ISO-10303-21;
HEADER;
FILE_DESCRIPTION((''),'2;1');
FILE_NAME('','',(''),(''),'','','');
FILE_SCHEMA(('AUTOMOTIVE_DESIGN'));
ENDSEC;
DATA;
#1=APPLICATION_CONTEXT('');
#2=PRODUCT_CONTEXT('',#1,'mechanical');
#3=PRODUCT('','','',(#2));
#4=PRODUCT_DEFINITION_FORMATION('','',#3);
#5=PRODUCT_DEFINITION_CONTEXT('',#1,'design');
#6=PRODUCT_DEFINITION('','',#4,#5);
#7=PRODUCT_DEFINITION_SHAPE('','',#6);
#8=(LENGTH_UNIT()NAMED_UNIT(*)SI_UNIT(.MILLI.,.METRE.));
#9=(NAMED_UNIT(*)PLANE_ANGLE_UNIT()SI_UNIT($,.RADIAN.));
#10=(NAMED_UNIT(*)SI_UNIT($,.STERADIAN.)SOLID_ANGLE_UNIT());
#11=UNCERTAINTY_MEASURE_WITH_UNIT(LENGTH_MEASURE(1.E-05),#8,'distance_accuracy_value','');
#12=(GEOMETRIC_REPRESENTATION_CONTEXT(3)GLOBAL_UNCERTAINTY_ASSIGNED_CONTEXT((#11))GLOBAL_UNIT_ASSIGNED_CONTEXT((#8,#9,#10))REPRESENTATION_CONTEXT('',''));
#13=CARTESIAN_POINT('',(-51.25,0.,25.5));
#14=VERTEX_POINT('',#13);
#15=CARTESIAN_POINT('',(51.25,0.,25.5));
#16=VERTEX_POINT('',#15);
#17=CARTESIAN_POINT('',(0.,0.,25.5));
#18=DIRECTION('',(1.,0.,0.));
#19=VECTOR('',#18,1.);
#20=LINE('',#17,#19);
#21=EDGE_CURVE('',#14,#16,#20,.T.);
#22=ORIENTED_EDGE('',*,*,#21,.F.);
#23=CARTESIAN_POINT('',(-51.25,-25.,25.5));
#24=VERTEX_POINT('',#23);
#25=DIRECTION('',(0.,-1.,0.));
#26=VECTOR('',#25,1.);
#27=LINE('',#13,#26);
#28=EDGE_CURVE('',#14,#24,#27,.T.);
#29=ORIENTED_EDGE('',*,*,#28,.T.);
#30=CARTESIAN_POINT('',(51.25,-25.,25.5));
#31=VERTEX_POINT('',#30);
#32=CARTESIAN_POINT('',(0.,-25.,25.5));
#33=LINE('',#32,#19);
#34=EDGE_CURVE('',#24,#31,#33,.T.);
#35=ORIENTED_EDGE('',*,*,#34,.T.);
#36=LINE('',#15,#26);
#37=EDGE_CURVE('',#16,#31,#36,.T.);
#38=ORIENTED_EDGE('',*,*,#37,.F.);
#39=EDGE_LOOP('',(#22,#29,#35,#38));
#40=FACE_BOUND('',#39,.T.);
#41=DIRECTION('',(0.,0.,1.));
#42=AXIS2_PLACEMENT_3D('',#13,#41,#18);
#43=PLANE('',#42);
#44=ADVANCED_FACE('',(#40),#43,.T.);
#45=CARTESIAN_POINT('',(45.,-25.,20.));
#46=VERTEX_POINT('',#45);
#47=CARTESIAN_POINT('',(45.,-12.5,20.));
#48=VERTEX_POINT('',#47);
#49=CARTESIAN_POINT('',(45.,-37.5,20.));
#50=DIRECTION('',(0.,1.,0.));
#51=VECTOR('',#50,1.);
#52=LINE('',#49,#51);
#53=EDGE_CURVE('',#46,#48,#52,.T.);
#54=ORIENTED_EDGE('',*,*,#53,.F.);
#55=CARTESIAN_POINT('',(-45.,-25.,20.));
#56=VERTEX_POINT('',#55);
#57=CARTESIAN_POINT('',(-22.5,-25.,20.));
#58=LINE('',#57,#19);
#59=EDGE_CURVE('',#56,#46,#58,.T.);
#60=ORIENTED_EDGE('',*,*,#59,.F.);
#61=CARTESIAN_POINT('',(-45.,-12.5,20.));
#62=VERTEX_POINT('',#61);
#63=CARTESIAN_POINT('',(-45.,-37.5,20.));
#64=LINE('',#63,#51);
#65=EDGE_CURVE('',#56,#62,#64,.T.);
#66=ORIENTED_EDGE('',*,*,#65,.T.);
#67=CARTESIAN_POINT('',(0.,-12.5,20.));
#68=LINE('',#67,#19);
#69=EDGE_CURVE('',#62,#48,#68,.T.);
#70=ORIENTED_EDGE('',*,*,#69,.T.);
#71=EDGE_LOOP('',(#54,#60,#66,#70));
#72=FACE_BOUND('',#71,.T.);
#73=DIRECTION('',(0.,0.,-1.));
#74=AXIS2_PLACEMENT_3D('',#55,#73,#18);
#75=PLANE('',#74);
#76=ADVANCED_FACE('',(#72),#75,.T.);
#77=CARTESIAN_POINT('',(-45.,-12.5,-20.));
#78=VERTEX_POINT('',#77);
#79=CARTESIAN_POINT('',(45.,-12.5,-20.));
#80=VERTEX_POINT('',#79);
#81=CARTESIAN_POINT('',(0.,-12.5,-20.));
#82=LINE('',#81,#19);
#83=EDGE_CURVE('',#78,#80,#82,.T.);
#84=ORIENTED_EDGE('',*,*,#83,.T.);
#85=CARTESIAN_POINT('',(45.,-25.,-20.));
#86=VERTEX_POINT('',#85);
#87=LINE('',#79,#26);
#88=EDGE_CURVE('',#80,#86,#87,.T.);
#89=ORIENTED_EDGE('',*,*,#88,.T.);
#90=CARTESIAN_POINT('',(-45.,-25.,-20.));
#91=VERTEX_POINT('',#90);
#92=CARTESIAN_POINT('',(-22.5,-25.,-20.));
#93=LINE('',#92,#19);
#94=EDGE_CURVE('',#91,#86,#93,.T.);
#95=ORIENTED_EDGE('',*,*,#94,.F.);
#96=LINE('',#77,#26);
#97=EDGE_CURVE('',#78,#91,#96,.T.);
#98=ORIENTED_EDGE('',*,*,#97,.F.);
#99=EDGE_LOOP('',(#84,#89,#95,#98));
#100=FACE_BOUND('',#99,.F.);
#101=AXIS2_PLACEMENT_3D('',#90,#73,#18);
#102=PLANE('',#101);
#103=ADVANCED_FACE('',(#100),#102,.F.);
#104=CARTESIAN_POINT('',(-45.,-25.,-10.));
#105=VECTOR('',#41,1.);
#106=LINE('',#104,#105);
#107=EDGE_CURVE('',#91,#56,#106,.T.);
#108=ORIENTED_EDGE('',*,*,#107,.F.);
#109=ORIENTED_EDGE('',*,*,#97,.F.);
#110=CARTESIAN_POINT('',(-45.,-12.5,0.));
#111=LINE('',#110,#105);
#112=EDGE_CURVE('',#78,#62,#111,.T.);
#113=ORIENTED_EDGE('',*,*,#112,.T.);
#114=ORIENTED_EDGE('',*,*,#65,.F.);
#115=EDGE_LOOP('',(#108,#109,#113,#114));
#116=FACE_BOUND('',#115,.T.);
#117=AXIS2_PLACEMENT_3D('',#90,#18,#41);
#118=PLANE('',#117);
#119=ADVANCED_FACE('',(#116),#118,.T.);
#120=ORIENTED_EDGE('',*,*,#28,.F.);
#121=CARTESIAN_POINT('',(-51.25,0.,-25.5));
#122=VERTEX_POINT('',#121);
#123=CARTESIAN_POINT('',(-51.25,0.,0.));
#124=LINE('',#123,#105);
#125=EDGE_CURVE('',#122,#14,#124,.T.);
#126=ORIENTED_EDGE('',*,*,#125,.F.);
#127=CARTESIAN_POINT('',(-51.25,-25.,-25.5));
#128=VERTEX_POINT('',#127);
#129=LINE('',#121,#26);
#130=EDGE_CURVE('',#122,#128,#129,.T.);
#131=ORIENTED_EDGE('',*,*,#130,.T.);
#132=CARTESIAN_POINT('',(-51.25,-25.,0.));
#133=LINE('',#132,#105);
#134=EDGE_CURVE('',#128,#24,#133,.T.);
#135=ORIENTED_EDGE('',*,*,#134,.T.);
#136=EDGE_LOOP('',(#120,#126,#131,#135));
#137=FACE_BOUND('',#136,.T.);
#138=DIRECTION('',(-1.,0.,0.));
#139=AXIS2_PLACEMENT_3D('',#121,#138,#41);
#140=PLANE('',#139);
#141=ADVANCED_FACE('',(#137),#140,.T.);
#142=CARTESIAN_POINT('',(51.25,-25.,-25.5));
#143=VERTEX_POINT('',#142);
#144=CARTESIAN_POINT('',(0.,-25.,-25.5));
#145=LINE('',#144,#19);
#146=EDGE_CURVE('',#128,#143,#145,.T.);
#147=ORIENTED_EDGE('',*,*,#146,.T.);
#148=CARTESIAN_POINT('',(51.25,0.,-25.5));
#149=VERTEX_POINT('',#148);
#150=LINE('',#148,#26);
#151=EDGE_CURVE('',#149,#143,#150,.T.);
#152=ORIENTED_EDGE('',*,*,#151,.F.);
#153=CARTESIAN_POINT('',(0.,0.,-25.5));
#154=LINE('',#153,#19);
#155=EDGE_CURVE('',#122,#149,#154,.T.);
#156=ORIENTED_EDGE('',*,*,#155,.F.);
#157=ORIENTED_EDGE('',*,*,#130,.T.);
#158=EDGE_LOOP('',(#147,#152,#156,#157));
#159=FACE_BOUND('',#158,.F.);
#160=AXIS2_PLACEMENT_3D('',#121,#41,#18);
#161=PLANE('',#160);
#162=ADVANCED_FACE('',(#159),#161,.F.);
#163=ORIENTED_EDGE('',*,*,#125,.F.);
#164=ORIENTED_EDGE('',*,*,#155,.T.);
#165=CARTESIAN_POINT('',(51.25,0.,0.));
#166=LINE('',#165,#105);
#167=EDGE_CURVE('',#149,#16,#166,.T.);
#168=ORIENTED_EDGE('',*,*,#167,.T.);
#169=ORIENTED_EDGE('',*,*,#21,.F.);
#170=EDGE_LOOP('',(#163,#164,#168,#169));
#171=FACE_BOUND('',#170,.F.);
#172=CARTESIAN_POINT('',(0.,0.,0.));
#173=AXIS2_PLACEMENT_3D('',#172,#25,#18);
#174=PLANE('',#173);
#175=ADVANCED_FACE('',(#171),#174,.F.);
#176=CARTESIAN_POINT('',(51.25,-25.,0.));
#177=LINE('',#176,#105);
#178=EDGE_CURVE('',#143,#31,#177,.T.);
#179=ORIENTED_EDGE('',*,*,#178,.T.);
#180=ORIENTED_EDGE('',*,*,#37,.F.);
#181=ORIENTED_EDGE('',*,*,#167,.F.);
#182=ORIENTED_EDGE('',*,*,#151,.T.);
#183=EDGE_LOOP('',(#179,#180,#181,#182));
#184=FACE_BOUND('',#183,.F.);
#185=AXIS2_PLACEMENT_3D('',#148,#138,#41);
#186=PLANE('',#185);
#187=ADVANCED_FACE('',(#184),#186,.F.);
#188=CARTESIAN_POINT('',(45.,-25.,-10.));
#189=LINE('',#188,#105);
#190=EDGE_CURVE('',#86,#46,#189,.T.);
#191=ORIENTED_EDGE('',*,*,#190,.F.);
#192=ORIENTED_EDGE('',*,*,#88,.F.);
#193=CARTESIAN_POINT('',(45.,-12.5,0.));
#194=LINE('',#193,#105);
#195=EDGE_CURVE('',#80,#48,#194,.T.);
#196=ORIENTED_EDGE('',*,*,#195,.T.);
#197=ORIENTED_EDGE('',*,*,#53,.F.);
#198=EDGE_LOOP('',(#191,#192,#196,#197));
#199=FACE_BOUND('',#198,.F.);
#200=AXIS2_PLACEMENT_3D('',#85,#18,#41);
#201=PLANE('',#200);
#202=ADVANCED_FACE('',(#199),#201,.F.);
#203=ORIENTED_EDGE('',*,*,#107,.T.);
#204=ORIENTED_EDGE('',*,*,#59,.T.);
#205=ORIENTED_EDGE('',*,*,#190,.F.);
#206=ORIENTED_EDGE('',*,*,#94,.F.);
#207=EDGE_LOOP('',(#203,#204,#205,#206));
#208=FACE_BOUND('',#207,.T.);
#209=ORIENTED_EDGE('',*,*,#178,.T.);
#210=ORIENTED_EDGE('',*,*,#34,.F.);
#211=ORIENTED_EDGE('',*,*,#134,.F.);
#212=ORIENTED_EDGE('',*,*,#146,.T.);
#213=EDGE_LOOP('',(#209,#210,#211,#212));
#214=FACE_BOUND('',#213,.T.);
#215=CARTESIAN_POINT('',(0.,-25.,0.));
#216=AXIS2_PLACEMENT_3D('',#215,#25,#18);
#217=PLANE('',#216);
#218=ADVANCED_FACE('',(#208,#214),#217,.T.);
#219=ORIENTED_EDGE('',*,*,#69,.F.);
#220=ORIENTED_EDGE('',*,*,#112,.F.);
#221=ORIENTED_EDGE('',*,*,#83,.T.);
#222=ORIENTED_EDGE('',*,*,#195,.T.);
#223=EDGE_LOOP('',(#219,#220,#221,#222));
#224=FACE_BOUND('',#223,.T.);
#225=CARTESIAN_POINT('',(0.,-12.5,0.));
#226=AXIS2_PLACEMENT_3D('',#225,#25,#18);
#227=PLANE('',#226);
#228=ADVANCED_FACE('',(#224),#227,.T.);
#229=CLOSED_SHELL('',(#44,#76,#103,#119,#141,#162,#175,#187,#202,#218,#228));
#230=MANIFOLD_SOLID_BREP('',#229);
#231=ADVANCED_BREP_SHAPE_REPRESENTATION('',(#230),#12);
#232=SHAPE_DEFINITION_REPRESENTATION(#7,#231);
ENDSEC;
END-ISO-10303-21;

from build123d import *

# Parameters (mm, degrees)
F0_W     = 102.5
F0_H     = 51
F1_DEPTH = 25
F2_W     = 90
F2_H     = 40
F3_DEPTH = 12.5


# Not quite as in the source:
# - the program builds the solid bodies; features that only make, move or delete a surface that nothing else refers to are left out


with BuildPart() as f1:
    # F0 (on Front) → F1 (new body)
    with BuildSketch(Plane.XZ):
        Rectangle(F0_W, F0_H)
    extrude(amount=F1_DEPTH)

    # F2 (on face) → F3 (cut, symmetric)
    with BuildSketch(Plane.XZ.offset(25)):
        Rectangle(F2_W, F2_H)
    extrude(amount=F3_DEPTH, both=True, mode=Mode.SUBTRACT)


solid = f1.part
